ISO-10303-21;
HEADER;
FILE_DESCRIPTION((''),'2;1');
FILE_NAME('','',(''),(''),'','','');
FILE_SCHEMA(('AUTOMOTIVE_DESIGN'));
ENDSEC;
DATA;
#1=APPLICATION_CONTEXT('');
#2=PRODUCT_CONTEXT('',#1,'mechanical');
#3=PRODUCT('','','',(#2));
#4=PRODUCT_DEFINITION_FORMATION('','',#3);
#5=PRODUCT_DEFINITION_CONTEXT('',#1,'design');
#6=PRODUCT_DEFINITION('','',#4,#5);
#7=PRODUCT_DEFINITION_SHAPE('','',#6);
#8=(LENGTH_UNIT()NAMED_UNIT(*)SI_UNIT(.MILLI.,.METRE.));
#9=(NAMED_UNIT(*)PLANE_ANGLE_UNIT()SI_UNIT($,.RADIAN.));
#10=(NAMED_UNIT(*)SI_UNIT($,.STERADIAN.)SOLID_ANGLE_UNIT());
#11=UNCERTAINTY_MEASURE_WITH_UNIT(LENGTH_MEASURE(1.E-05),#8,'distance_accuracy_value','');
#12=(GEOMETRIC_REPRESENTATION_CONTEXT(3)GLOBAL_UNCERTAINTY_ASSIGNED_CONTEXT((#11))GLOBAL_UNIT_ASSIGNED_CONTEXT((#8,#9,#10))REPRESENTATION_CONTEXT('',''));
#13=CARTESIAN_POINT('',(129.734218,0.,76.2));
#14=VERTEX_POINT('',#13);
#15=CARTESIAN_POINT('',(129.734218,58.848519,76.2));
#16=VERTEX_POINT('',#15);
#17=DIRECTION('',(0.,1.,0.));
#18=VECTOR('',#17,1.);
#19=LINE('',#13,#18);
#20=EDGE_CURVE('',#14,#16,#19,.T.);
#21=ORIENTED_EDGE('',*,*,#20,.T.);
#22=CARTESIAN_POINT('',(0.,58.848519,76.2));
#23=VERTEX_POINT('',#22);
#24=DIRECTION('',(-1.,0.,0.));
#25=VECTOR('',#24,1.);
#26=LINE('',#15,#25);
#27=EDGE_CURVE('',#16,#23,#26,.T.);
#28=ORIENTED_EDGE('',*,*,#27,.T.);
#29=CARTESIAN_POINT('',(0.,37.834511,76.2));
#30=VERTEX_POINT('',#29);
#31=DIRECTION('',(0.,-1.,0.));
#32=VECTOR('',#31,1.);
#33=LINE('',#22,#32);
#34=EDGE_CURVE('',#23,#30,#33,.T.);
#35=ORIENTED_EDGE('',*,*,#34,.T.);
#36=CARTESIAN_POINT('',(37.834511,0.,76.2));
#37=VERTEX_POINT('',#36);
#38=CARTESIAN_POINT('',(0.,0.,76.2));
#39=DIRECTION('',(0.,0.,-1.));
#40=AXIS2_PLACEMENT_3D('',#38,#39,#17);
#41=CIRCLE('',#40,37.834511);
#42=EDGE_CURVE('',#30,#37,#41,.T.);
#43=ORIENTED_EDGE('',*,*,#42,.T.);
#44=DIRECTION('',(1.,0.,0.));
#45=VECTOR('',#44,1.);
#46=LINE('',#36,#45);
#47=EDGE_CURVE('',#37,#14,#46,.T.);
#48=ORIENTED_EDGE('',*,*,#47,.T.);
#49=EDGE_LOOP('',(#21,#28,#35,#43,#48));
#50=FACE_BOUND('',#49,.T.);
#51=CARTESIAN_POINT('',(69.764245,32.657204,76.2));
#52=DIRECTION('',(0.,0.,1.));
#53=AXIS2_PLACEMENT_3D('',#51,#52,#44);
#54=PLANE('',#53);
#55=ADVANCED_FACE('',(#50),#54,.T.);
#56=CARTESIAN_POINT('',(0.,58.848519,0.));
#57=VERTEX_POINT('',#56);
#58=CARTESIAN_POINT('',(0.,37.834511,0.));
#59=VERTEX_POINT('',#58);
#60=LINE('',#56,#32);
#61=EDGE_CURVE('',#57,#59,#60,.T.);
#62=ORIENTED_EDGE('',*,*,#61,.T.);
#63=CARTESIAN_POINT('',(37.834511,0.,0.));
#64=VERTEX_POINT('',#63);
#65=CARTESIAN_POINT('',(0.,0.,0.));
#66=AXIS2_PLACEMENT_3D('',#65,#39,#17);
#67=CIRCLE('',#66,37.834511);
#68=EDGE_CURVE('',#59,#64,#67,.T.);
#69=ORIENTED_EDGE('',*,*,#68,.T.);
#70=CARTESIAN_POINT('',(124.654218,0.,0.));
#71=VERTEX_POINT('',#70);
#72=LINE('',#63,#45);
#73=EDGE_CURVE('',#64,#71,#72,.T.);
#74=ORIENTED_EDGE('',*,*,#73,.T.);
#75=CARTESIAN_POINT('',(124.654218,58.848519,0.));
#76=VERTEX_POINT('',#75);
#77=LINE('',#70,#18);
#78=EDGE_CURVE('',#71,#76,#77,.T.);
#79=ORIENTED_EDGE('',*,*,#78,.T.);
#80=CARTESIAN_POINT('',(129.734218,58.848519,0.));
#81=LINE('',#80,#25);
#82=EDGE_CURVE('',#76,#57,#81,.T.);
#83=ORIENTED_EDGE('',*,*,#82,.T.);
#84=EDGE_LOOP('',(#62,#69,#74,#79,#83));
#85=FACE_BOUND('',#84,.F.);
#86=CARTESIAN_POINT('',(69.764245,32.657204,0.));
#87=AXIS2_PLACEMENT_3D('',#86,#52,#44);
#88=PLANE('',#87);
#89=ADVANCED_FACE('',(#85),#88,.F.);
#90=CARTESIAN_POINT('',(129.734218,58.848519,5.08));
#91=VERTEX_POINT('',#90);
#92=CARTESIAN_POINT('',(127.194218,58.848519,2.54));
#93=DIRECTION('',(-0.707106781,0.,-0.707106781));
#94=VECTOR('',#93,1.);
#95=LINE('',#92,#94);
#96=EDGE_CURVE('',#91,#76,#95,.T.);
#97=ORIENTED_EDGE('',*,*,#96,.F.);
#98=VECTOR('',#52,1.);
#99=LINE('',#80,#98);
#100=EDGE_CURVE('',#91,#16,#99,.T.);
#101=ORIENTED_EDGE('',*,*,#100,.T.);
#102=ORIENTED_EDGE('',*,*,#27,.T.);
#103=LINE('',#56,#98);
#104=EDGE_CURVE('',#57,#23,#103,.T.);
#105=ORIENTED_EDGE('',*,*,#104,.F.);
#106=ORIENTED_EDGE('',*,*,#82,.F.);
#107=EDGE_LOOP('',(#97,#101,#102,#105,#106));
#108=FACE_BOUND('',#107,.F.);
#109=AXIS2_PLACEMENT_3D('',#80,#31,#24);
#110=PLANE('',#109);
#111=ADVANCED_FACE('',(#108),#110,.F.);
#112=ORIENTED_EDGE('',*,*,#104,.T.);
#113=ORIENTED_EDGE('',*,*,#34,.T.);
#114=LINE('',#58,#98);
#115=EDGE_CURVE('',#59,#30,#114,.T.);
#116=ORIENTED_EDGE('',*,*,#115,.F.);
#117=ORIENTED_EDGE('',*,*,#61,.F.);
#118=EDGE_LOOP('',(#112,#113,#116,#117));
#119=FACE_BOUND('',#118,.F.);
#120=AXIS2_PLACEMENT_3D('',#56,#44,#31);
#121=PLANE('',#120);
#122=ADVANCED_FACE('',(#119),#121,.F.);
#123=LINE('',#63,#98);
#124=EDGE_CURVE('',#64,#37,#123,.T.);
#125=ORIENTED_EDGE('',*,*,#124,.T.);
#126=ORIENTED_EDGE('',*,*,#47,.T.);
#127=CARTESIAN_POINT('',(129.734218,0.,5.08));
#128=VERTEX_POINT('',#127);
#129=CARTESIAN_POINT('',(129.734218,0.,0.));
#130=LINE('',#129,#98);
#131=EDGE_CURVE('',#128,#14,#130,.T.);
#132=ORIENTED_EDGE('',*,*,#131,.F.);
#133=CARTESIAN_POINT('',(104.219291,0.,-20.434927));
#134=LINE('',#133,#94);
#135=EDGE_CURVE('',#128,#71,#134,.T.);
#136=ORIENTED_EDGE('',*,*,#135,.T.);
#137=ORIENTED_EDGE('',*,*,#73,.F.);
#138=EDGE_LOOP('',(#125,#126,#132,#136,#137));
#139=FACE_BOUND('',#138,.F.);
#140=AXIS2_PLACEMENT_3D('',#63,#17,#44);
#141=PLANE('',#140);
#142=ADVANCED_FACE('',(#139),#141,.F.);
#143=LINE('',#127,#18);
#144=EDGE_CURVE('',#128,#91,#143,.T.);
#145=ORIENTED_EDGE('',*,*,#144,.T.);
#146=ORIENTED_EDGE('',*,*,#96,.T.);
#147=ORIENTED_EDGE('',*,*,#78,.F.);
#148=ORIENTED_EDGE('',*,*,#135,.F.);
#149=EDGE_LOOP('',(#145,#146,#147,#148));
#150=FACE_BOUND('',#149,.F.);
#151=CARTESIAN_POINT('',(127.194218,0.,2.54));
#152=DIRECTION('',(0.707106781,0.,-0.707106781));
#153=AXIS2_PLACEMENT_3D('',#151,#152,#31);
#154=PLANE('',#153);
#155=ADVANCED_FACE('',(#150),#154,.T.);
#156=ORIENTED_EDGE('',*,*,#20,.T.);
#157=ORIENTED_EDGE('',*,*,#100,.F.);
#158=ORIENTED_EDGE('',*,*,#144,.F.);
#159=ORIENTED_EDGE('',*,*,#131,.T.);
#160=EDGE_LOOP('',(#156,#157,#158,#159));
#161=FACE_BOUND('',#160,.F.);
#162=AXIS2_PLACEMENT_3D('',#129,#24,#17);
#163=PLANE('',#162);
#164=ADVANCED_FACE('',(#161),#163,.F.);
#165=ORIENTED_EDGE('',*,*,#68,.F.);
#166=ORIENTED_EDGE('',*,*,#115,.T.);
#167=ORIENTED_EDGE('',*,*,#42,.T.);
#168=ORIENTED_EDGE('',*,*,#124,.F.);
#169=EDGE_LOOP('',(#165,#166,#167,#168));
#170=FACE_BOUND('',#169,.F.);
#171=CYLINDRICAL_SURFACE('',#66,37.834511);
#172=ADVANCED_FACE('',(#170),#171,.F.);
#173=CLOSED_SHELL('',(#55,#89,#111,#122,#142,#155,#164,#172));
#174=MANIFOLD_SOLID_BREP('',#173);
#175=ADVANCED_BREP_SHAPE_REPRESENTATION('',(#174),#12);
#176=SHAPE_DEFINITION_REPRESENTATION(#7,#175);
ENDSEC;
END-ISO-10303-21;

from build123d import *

# Parameters (mm, degrees)
F1_DEPTH = 76.2
F3_SIZE  = 5.08


# Not quite as in the source:
# - the program builds the solid bodies; features that only make, move or delete a surface that nothing else refers to are left out


with BuildPart() as f1:
    # F0 (on Top) → F1 (new body)
    with BuildSketch(Plane.XY):
        with BuildLine():
            ThreePointArc((0, 37.8345108272), (26.7530391688, 26.7530391688), (37.8345108272, 0))
            Line((37.8345108272, 0), (129.7342181206, 0))
            Line((129.7342181206, 0), (129.7342181206, 58.8485188782))
            Line((129.7342181206, 58.8485188782), (0, 58.8485188782))
            Line((0, 58.8485188782), (0, 37.8345108272))
        make_face()
    extrude(amount=F1_DEPTH)

    # F3
    f3_edges = [f1.edges().sort_by_distance(p)[0] for p in [
        (129.734218, 29.424259, 0),
    ]]
    chamfer(f3_edges, length=F3_SIZE)


solid = f1.part
